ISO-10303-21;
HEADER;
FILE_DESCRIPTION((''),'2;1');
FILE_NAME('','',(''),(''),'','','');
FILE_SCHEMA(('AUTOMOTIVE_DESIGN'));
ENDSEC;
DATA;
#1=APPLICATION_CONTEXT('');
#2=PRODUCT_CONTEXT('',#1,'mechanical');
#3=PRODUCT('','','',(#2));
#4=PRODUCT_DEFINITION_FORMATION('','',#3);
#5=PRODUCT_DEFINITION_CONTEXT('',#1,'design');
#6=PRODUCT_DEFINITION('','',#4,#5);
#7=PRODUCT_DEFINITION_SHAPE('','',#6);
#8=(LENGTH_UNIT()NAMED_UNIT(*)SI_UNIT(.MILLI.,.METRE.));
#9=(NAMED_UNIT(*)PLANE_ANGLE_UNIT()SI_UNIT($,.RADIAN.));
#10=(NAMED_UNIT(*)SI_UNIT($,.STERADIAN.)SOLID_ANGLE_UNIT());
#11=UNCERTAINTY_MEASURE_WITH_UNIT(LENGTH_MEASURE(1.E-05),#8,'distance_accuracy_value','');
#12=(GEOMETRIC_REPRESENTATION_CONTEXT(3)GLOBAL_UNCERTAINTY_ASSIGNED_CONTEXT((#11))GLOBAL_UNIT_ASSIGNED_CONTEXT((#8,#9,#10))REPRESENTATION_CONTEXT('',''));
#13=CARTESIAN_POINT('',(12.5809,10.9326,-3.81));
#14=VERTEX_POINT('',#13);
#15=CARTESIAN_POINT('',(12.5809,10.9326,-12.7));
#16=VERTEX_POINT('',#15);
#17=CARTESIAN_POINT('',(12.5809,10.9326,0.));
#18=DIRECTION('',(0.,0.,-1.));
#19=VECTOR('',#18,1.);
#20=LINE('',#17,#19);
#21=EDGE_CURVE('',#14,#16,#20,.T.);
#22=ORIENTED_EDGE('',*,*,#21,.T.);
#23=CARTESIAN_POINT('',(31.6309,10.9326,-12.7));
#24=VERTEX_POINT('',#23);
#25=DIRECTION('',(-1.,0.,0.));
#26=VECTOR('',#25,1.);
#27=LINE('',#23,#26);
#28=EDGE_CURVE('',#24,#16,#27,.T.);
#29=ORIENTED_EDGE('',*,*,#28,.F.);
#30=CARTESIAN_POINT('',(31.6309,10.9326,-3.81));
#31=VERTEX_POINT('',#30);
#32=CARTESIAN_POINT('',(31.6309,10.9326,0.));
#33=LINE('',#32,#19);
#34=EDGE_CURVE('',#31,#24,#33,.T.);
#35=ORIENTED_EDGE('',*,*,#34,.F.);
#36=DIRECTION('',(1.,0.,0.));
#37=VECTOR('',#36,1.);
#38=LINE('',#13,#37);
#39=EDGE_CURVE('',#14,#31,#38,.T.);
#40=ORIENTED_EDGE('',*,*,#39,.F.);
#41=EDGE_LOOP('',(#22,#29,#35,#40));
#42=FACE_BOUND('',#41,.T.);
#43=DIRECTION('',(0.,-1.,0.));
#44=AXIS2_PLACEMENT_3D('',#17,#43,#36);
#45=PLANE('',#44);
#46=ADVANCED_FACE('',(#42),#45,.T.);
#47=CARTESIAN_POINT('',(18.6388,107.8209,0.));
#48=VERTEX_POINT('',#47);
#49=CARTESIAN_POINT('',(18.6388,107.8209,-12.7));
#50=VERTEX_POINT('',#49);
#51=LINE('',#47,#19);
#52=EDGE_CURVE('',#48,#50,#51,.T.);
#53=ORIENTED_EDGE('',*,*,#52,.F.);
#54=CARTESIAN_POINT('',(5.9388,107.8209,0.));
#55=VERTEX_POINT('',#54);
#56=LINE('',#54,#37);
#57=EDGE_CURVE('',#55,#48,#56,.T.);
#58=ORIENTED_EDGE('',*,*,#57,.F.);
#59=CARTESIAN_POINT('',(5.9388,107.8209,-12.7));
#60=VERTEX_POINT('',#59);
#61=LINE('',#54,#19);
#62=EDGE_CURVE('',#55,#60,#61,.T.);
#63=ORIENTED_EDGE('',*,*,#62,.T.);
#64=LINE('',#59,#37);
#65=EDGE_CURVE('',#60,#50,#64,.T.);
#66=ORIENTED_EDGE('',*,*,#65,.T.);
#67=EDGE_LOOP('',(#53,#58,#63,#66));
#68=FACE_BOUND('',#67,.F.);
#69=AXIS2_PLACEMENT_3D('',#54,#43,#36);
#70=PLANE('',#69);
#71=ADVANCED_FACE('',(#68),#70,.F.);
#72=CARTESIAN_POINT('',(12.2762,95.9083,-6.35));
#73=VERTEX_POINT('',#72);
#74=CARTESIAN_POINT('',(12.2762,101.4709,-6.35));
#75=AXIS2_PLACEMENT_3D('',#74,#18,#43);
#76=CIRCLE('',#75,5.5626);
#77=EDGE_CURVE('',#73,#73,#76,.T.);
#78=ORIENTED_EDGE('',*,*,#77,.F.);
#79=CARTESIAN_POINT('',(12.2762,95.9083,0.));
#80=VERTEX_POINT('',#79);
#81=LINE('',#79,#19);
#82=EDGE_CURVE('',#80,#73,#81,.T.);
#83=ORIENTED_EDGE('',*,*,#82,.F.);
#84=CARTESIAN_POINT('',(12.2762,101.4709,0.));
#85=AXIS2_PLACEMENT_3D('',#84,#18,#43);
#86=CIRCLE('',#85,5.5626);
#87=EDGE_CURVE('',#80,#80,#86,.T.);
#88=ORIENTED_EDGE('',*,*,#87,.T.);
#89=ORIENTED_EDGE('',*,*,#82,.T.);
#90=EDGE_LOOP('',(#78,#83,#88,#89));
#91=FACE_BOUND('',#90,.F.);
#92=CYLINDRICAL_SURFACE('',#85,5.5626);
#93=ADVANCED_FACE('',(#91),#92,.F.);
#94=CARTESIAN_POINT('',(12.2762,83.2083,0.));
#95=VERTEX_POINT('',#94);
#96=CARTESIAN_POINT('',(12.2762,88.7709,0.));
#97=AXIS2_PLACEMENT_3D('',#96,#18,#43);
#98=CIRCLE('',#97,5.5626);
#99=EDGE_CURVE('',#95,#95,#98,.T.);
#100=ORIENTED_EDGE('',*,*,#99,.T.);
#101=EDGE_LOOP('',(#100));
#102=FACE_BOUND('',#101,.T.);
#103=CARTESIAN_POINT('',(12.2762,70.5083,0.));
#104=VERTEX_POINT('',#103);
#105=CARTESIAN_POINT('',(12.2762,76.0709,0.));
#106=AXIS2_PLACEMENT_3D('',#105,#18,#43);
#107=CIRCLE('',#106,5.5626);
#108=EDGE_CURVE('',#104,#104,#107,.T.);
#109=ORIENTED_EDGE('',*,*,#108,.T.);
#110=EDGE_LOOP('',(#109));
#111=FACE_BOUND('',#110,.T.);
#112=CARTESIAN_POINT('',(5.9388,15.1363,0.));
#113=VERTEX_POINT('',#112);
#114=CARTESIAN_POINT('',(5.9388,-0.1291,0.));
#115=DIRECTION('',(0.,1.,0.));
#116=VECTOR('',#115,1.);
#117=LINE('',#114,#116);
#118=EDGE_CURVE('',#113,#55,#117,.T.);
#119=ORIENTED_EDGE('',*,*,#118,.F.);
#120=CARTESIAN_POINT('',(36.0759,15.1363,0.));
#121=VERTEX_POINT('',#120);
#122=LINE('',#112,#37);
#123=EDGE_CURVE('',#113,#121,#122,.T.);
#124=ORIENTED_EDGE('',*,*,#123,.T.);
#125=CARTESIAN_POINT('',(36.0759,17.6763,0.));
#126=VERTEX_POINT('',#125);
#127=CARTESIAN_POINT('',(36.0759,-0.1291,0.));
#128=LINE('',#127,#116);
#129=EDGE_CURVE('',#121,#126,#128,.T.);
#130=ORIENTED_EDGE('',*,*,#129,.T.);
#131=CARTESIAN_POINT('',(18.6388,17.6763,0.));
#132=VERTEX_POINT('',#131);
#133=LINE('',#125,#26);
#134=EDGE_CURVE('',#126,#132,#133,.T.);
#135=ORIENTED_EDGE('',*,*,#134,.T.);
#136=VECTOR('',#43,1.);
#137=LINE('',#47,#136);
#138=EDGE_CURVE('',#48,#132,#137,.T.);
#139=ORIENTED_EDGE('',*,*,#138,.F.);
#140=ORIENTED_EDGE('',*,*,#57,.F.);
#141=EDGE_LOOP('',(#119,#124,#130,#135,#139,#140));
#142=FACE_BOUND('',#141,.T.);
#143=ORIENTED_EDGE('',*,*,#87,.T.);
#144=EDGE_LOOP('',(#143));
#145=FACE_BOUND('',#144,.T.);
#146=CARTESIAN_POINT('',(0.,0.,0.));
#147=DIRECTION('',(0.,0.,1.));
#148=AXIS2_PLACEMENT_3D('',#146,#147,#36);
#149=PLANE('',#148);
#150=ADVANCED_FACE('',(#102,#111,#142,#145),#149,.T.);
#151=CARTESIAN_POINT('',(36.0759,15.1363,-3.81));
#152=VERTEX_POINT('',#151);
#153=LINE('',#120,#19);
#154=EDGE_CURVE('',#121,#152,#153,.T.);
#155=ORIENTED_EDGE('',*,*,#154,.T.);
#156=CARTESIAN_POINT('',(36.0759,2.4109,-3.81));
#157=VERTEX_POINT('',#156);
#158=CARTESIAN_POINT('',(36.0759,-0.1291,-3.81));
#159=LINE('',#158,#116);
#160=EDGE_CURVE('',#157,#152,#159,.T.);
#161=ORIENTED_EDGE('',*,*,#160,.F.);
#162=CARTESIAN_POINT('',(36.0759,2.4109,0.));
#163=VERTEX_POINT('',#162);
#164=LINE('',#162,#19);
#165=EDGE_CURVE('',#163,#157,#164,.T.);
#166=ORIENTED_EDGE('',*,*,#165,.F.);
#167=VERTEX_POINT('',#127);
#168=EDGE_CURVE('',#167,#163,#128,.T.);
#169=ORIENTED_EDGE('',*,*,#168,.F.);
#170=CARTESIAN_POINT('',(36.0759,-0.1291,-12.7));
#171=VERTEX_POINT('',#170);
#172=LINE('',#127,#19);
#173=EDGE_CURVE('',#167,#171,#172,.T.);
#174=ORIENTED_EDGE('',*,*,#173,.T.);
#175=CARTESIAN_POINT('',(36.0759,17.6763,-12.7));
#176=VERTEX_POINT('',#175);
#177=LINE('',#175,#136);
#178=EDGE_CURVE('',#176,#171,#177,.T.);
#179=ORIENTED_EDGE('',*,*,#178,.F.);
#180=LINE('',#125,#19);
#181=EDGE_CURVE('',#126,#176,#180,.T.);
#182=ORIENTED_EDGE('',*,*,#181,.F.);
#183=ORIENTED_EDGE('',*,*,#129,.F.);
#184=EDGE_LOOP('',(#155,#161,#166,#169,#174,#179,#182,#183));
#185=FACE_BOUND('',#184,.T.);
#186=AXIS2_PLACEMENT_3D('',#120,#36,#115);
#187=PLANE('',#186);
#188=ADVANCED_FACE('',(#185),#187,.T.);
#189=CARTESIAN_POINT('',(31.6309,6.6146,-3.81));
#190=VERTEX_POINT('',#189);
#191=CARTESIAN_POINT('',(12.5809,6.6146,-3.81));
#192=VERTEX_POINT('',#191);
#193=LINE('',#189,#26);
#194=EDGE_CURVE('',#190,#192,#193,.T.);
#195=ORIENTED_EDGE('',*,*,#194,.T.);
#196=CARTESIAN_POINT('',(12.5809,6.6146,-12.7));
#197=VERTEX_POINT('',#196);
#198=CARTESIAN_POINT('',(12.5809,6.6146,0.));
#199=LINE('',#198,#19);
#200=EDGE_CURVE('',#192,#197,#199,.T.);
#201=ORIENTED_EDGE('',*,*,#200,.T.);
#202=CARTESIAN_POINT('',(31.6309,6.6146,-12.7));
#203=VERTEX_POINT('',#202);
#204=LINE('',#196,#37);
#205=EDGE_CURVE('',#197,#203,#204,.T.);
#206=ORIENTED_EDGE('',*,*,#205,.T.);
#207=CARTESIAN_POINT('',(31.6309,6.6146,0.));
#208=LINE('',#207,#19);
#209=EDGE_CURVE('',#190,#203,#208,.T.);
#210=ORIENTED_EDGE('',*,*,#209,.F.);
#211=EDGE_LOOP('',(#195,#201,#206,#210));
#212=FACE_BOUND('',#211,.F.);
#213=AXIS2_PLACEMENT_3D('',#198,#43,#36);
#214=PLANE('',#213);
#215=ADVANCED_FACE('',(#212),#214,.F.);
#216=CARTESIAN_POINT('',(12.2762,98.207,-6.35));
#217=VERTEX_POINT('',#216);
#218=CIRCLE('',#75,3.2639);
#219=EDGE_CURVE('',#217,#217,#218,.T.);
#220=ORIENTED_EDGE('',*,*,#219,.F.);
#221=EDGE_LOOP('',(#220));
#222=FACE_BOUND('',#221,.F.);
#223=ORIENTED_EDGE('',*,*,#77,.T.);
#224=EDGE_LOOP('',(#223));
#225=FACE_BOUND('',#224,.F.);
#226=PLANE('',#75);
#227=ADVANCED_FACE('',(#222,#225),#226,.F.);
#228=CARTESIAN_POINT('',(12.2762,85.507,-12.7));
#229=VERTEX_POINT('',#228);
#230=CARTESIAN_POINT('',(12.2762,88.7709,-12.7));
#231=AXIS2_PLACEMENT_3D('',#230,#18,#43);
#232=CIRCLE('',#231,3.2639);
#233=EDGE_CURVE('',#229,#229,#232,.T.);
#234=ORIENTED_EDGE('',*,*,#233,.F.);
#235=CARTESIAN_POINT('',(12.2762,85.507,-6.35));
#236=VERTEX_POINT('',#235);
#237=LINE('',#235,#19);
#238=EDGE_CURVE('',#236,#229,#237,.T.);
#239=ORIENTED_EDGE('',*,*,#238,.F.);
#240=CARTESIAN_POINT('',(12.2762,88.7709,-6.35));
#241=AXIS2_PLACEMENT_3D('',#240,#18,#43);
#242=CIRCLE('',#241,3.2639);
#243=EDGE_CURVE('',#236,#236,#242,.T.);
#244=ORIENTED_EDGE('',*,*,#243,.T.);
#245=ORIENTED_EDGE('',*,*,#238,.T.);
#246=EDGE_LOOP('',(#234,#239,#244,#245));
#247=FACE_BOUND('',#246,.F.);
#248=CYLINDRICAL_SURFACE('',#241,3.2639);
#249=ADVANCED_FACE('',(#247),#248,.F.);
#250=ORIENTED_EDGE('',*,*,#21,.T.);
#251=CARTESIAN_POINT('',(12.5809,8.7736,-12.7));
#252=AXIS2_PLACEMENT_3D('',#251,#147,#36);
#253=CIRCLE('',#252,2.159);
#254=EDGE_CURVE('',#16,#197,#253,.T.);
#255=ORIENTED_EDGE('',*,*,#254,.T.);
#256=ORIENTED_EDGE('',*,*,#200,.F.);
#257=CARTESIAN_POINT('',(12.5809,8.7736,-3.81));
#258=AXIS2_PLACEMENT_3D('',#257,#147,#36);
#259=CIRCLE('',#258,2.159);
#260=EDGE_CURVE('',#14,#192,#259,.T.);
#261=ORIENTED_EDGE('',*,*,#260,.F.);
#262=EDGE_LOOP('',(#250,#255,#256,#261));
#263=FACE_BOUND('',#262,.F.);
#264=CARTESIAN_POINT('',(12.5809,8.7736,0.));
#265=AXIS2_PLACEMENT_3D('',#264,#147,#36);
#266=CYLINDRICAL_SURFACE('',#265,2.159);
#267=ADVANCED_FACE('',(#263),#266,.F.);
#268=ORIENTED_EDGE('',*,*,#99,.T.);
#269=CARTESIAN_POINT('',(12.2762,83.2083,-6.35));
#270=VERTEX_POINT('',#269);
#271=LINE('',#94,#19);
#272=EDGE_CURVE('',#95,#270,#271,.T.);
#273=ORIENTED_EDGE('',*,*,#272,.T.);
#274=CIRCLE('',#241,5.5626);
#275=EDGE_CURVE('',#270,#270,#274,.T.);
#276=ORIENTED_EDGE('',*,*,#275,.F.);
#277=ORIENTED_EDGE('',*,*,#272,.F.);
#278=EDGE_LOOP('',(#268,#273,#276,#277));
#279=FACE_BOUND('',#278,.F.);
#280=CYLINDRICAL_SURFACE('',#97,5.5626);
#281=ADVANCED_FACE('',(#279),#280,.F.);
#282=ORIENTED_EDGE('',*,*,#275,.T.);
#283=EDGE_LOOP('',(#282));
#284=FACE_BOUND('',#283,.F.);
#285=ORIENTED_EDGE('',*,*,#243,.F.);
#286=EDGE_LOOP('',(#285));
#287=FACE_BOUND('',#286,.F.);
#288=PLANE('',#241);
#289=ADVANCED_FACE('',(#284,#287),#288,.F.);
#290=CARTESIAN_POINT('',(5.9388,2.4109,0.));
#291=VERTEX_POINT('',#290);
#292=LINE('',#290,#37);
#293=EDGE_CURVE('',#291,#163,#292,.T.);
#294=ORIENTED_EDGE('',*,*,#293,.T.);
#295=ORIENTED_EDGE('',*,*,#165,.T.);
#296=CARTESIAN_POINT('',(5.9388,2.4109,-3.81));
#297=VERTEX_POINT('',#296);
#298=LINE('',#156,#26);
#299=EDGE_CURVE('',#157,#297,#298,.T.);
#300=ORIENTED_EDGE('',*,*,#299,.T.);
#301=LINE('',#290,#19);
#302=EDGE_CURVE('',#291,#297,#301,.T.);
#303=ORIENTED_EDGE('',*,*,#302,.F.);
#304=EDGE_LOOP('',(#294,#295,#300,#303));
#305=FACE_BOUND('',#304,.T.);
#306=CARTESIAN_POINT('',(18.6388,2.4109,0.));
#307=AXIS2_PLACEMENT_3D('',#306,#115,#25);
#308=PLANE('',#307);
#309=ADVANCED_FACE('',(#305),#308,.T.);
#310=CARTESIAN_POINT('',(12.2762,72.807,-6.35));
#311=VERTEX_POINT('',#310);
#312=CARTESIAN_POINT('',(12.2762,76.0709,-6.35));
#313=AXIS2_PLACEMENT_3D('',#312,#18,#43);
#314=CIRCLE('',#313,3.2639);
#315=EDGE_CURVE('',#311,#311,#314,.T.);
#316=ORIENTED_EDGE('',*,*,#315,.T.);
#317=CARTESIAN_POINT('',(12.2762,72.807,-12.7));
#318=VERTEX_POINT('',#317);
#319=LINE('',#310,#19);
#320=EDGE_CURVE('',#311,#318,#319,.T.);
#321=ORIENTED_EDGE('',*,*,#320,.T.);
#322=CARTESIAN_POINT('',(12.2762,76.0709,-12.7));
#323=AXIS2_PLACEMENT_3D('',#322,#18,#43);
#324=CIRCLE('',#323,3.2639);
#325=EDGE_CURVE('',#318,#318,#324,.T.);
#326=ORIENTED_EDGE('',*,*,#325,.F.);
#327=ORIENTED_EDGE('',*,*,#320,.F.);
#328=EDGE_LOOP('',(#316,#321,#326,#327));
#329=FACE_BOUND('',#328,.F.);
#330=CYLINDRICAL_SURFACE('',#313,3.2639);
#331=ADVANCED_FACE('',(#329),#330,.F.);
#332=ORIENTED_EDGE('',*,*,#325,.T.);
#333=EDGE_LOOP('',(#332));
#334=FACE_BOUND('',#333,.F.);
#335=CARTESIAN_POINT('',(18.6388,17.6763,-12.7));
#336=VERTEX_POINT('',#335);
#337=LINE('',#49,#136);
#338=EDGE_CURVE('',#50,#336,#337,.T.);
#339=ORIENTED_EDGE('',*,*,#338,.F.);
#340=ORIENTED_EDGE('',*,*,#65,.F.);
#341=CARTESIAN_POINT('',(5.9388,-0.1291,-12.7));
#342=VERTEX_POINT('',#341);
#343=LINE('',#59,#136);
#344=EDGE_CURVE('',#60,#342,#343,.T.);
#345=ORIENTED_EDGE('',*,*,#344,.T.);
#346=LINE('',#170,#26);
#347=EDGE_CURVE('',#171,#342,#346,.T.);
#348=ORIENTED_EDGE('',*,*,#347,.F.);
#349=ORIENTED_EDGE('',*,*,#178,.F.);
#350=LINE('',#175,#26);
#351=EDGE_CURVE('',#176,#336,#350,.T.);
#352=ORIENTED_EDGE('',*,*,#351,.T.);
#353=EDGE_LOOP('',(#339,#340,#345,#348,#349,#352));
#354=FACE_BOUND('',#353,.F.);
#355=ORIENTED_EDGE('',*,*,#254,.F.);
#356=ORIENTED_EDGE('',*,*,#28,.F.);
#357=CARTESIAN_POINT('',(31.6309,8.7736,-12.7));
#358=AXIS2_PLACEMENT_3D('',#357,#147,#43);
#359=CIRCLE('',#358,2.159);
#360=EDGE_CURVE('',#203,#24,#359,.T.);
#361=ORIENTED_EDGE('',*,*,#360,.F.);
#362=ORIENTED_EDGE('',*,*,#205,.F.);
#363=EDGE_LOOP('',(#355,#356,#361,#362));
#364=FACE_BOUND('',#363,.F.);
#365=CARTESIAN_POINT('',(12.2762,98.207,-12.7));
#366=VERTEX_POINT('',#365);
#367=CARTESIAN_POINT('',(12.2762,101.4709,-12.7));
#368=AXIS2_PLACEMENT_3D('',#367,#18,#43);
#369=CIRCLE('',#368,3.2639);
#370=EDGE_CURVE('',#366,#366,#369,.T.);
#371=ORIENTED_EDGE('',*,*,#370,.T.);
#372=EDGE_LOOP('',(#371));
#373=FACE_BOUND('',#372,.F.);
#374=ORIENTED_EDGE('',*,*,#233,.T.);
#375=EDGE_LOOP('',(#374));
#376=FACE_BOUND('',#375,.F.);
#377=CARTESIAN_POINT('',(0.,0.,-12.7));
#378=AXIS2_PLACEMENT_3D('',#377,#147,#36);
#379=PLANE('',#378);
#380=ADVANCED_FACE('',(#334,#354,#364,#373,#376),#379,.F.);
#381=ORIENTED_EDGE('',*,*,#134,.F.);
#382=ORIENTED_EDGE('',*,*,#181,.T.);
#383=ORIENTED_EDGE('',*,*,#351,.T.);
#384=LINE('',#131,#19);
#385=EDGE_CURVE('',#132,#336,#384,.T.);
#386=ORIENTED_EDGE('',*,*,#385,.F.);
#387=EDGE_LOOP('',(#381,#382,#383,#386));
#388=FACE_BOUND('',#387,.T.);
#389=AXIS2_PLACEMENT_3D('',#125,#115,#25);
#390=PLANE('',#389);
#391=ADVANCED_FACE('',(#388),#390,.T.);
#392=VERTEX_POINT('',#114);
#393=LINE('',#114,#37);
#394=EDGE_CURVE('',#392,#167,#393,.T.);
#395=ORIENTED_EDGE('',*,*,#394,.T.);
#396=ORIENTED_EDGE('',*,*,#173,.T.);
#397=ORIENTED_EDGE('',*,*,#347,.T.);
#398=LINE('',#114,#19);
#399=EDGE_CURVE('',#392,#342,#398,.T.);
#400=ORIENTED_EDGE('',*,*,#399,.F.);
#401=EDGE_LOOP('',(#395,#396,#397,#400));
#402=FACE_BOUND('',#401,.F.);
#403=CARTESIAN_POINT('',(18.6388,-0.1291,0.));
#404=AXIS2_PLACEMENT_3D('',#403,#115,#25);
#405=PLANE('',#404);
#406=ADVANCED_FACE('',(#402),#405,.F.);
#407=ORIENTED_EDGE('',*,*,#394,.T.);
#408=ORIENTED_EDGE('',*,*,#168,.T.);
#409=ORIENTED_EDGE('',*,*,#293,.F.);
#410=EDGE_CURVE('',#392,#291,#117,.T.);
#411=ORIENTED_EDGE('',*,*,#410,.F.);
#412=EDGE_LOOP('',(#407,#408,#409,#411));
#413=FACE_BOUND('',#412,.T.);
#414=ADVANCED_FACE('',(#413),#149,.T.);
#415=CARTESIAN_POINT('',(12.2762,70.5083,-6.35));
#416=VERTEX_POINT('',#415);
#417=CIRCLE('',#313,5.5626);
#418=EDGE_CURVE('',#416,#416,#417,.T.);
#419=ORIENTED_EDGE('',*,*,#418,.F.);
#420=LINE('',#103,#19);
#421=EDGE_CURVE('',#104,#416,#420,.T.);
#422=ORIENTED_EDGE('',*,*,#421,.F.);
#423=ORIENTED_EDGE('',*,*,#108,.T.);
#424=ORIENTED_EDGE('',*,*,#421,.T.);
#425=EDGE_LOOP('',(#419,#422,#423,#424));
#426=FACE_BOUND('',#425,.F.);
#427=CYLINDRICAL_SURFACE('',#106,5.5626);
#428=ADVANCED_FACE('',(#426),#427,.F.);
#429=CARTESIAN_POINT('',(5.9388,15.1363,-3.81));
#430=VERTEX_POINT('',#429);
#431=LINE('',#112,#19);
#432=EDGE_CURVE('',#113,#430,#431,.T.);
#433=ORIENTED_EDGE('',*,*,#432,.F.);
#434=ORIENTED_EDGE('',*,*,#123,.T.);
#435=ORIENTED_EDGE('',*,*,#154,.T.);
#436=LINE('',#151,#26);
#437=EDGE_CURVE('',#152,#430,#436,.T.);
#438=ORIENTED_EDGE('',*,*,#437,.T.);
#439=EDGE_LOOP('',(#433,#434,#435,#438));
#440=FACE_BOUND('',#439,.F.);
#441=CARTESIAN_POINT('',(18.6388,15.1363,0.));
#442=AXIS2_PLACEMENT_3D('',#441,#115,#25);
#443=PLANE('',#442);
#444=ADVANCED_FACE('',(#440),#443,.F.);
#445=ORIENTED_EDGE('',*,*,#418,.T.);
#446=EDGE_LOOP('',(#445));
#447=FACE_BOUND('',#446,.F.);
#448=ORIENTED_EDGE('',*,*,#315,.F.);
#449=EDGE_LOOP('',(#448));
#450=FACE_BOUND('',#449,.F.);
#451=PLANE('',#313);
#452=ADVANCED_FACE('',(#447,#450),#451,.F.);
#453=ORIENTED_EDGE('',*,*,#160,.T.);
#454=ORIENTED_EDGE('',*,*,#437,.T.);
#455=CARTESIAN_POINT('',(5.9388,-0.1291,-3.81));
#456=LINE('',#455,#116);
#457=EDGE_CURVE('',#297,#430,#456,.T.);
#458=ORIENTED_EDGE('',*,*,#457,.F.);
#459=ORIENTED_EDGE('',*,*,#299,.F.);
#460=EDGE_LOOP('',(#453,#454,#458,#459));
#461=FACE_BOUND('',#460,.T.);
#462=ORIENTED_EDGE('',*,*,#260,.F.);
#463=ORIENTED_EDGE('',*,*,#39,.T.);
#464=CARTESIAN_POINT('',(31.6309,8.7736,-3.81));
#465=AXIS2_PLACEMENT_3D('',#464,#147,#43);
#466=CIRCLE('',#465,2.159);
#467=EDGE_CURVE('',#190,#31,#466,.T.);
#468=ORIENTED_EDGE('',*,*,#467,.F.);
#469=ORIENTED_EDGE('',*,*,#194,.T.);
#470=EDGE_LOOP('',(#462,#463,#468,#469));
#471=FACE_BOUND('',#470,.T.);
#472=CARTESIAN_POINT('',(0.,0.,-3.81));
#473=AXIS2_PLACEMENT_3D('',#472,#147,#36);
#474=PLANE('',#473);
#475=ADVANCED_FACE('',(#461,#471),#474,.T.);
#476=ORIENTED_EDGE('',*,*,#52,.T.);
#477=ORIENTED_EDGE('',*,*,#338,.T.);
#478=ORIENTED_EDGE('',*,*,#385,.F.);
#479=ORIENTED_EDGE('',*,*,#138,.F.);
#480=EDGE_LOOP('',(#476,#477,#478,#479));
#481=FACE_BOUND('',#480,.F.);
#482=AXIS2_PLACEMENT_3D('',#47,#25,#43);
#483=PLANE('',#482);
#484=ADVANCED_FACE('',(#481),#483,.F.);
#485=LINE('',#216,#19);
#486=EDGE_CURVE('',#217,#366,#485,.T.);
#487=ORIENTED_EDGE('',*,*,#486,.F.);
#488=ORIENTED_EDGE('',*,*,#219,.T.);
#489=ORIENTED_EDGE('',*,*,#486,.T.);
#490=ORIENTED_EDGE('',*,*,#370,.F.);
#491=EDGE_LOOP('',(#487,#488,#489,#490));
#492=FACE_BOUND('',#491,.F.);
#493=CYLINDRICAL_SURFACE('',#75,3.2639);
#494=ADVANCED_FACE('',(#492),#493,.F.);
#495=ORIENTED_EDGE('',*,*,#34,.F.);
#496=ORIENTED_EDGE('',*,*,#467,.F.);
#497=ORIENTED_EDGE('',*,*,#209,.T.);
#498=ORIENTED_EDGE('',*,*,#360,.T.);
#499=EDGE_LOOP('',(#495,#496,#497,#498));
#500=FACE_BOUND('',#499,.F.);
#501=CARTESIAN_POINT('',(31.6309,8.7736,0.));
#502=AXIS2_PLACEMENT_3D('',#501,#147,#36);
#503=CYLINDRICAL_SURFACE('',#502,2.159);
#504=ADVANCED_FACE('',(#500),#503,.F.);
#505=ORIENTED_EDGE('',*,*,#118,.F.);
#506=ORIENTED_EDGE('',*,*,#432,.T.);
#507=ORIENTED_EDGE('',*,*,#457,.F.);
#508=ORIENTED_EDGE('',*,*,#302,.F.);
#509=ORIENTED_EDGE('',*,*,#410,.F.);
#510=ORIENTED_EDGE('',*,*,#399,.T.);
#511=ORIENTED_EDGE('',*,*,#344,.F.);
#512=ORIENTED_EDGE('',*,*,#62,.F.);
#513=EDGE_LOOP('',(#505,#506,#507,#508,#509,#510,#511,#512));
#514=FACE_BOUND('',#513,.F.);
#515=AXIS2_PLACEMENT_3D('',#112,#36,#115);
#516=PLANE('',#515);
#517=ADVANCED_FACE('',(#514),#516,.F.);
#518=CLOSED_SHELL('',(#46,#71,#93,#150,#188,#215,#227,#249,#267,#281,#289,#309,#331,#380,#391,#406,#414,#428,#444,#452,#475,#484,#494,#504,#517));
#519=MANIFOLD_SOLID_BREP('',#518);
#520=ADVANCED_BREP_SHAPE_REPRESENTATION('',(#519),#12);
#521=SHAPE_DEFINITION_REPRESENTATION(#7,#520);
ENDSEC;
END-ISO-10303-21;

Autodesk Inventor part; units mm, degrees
ref_plane "YZ Plane" through (0, 0, 0) normal (1, 0, 0) x (0, 1, 0)
ref_plane "XZ Plane" through (0, 0, 0) normal (0, 1, 0) x (-1, 0, 0)
ref_plane "XY Plane" through (0, 0, 0) normal (0, 0, 1) x (1, 0, 0)
sketch "Sketch1" plane through (0, 0, 0) normal (0, 0, 1) x (1, 0, 0)
  line L0 (5.9388, 107.8209) -> (18.6388, 107.8209)
  line L1 (18.6388, 107.8209) -> (18.6388, -0.1291)
  line L2 (18.6388, -0.1291) -> (5.9388, -0.1291)
  line L3 (5.9388, -0.1291) -> (5.9388, 107.8209)
  line L4 (36.0759, 2.4109) -> (5.9388, 2.4109)
  line L5 (36.0759, 15.1363) -> (5.9388, 15.1363)
  line L6 (18.6388, -0.1291) -> (36.0759, -0.1291)
  line L7 (36.0759, -0.1291) -> (36.0759, 17.6763)
  line L8 (36.0759, 17.6763) -> (18.6388, 17.6763)
  circle A0 centre (31.6309, 8.7736) radius 2.159
  circle A1 centre (12.5809, 8.7736) radius 2.159
  line L9 (12.5809, 6.6146) -> (31.6309, 6.6146)
  line L10 (12.5809, 10.9326) -> (31.6309, 10.9326)
  point P0 (12.2762, 101.4709)
  point P1 (12.2762, 88.7709)
  point P2 (12.2762, 76.0709)
  point P3 (18.6388, 2.4109)
  point P4 (18.6388, 15.1363)
  dimension "d0" = 12.7
  dimension "d1" = 107.95
  dimension "d2" = 6.35
  dimension "d3" = 12.7
  dimension "d4" = 6.3626
  dimension "d5" = 6.3626
  dimension "d6" = 6.3626
  dimension "d7" = 12.7
  dimension "d8" = 2.54
  dimension "d9" = 12.7254
  dimension "d10" = 17.4371
  dimension "d11" = 2.54
  dimension "d12" = 4.318
  dimension "d13" = 6.3627
  dimension "d14" = 4.445
  dimension "d15" = 4.318
  dimension "d16" = 6.3627
  dimension "d17" = 19.05
extrude "Extrusion1" add sketch "Sketch1" against normal blind 12.7 contours L0 L1 L5 L3 | L5 L1 L10 A1 L9 L4 L3 | L8 L7 L5 L1 | L4 L1 L2 L3 | L5 L7 L4 L1 L9 A0 L10 | L4 L7 L6 L1
extrude "Extrusion2" cut sketch "Sketch1" against normal blind 3.81 contours L5 L1 L10 A1 L9 L4 L3 | L5 L7 L4 L1 L9 A0 L10 | L1 L9 A1 L10
hole "Hole1" at (12.2762, 101.4709, 0) at (12.2762, 88.7709, 0) at (12.2762, 76.0709, 0) direction (0, 0, -1) diameter 6.5278 end through all counterbore diameter 11.1252 counterbore depth 6.35 clearance for "Socket Head Cap Screw" size "1/4" standard "Ansi Unified Screw Threads"
properties part number "J005771" material "STAINLESS STEEL, 17-4, H900"
